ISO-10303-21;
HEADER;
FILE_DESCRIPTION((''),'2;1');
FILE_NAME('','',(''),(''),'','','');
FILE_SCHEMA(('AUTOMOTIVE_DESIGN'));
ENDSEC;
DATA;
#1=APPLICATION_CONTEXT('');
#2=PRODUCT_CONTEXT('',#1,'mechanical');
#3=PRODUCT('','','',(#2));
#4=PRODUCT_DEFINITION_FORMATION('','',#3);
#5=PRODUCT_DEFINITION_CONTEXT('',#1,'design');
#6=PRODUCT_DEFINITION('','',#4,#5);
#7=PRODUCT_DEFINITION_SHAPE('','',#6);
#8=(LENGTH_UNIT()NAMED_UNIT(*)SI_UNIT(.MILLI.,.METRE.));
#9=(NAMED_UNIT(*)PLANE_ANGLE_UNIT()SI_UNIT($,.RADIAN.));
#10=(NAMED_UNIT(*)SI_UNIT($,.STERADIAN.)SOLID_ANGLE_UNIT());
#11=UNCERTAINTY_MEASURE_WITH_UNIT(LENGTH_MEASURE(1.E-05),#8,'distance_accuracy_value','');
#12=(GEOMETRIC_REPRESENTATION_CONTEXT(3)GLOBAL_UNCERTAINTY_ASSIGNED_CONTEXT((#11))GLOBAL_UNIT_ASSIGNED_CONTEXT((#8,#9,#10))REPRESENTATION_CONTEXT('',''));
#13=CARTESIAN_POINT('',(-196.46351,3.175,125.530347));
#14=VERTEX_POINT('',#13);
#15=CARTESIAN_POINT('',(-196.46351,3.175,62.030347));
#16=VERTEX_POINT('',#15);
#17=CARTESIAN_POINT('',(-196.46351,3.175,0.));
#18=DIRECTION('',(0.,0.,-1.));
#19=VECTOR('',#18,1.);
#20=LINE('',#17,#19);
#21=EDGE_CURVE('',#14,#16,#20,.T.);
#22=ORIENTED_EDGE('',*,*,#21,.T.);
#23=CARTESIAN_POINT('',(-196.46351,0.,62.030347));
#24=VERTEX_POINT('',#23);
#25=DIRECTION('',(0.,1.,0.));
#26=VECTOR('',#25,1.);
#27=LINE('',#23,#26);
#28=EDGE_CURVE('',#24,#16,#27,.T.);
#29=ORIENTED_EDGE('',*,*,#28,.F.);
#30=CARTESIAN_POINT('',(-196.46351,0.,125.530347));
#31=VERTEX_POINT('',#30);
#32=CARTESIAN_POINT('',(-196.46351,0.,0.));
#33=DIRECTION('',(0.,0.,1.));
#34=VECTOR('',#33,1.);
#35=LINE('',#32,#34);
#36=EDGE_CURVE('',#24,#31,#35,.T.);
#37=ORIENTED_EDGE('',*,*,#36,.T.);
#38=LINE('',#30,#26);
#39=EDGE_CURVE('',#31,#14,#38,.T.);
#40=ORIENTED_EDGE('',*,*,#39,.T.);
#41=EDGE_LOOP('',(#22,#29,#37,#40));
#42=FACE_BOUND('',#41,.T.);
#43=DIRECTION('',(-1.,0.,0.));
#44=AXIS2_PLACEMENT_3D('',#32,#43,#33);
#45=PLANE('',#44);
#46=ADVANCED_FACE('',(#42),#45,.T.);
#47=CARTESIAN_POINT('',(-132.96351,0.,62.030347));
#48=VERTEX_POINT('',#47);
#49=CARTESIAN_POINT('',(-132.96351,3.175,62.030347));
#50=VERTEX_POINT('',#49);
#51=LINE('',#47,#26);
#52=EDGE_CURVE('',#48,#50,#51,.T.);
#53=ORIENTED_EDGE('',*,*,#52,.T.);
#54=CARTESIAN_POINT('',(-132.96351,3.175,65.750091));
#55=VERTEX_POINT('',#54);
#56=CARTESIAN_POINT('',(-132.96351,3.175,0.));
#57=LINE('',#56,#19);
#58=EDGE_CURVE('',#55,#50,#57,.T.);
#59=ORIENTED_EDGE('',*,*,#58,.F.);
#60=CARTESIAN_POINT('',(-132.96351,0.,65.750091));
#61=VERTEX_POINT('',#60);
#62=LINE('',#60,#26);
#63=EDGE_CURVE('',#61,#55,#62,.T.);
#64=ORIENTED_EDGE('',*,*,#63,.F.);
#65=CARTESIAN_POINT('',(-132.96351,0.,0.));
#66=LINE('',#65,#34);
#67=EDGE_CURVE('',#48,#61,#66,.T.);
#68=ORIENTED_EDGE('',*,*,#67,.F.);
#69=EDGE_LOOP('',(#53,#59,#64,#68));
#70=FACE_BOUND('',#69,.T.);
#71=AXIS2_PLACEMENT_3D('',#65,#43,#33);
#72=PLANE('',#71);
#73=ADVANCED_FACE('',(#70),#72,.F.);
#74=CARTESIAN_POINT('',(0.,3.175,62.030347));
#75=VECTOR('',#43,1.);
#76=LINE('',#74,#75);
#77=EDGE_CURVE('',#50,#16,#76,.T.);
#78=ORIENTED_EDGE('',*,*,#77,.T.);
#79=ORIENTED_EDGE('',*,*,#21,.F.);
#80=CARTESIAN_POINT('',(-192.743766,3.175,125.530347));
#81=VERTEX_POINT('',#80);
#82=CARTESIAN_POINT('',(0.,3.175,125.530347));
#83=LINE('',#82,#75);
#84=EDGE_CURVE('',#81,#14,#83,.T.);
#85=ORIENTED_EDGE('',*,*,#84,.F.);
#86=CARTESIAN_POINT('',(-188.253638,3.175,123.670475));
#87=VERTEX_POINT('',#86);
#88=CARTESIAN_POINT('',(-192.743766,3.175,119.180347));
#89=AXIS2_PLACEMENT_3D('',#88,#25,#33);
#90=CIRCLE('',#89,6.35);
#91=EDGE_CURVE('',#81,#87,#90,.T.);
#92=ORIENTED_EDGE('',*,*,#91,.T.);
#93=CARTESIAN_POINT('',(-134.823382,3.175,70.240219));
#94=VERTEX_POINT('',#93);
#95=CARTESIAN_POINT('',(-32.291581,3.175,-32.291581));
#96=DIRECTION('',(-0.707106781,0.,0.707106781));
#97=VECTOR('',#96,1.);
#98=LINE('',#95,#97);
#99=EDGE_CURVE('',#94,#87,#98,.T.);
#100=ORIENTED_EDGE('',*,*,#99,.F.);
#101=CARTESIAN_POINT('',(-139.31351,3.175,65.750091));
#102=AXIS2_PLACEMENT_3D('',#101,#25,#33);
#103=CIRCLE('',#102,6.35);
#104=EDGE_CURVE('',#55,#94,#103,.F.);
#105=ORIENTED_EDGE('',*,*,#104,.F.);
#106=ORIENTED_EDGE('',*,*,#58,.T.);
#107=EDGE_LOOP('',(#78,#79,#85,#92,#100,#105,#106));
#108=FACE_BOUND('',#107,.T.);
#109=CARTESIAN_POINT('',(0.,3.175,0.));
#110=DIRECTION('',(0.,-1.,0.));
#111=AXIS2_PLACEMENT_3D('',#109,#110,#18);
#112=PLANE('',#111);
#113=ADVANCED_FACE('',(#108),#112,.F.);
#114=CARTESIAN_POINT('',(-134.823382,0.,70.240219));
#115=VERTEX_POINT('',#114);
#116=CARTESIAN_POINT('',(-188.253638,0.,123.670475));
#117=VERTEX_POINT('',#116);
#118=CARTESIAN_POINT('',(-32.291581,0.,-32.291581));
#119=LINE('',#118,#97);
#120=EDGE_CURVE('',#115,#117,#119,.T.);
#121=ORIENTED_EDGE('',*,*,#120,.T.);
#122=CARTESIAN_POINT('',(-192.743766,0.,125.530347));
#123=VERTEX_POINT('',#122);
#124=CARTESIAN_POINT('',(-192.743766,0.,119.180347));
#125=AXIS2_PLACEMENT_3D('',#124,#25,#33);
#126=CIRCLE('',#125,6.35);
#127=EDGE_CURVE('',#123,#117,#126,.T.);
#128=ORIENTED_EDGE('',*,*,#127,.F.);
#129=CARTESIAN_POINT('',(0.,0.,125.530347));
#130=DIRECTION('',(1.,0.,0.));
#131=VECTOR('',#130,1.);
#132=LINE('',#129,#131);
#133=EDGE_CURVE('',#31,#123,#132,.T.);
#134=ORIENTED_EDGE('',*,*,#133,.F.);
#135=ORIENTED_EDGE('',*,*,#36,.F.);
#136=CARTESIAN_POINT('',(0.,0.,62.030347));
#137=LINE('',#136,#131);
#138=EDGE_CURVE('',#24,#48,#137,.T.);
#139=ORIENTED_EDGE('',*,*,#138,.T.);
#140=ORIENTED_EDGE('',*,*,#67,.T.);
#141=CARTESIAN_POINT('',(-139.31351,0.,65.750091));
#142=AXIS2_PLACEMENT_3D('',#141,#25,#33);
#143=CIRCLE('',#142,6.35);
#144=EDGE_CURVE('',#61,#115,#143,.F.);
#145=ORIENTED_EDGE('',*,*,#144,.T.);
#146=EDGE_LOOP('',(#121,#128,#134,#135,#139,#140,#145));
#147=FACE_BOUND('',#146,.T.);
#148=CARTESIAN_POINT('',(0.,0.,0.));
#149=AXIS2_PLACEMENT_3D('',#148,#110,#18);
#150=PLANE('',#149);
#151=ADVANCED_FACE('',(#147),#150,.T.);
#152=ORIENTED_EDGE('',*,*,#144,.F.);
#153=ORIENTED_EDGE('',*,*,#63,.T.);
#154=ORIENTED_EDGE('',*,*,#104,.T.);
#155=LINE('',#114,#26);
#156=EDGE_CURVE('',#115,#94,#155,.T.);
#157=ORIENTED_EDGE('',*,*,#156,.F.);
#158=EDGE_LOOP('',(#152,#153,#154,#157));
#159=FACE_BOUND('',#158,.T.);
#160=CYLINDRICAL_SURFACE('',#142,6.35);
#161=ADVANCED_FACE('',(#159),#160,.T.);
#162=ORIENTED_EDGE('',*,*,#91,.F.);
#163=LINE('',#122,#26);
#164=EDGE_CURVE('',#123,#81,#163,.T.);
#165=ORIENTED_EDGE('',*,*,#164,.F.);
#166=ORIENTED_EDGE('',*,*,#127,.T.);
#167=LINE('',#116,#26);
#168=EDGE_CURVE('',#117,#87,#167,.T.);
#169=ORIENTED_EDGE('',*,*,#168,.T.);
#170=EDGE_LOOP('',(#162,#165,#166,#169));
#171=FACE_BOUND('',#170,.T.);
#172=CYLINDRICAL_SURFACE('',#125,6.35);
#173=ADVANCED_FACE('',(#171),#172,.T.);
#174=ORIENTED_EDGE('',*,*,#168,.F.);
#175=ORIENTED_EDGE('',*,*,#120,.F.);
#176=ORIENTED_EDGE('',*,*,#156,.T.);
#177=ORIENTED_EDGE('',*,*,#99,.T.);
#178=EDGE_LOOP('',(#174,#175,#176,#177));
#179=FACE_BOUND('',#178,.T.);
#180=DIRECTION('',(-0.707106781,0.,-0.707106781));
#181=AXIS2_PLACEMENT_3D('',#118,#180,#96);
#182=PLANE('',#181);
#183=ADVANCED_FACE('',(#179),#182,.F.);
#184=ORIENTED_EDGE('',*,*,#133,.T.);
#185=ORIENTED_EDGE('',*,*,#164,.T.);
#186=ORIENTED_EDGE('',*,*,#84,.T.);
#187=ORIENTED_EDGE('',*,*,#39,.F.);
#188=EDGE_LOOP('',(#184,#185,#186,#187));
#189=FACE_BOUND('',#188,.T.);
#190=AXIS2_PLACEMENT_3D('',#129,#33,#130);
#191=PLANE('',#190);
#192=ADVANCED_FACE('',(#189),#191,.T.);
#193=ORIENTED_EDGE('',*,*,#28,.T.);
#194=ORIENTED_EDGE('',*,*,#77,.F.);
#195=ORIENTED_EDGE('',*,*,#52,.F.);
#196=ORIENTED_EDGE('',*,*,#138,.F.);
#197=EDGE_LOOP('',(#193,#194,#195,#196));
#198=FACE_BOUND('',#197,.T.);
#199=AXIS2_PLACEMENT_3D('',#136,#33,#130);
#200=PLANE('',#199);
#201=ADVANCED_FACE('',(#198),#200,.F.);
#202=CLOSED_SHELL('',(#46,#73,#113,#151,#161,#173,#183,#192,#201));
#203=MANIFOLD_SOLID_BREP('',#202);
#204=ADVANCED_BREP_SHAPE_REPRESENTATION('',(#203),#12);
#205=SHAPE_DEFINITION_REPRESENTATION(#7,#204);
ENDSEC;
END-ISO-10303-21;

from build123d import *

# Parameters (mm, degrees)
SKETCH2_W                      = 304.8
SKETCH2_H                      = 304.8
BOSS_EXTRUDE1_DEPTH            = 3.175
CUT_EXTRUDE1_DEPTH             = 348.408852067
CUT_EXTRUDE1_DEPTH_BACK        = 348.408852067
SKETCH3_W                      = 304.8
SKETCH3_H                      = 304.8
SKETCH3_R                      = 12.7
SKETCH3_R_2                    = 8.89
BODY_DELETE_KEEP_1_OUTLINE_R   = 12.7
BODY_DELETE_KEEP_1_OUTLINE_R_2 = 8.89
BODY_DELETE_KEEP_1_DEPTH       = 3.175


# Read off the part's stored shape, not the designer's step: Body-Delete/Keep 1
with BuildPart() as part:
    # Sketch2 → Boss-Extrude1 (new body)
    with BuildSketch(Plane(origin=(0, 0, 0), x_dir=(1, 0, 0), z_dir=(0, 1, 0))):
        with Locations((-56.763509666, -124.968808797)):
            Rectangle(SKETCH2_W, SKETCH2_H)
    extrude(amount=BOSS_EXTRUDE1_DEPTH)

    # Sketch3 → Cut-Extrude1 (cut, two sides: drawn at the far end of the back side and taken through both)
    # profile 1 of 3: a face of its own
    with BuildSketch(Plane(origin=(0, 3.175, 0), x_dir=(1, 0, 0), z_dir=(0, 1, 0)).offset(-CUT_EXTRUDE1_DEPTH_BACK)):
        with Locations((-56.763509666, -124.968808797)):
            Rectangle(SKETCH3_W, SKETCH3_H)
        Polygon((-188.253637726, -268.695366412), (-192.063637726, -268.695366412), (-192.063637726, -265.393366412), (-198.413637726, -265.393366412), (-188.253637726, -205.195366412), align=None, mode=Mode.SUBTRACT)
        Polygon((-185.713637726, -265.393366412), (-175.553637726, -205.195366412), (-175.553637726, -268.695366412), (-179.363637726, -268.695366412), (-179.363637726, -265.393366412), align=None, mode=Mode.SUBTRACT)
        Polygon((-162.853637726, -268.695366412), (-166.663637726, -268.695366412), (-166.663637726, -265.393366412), (-173.013637726, -265.393366412), (-162.853637726, -205.195366412), align=None, mode=Mode.SUBTRACT)
        Polygon((-150.153637726, -268.695366412), (-153.963637726, -268.695366412), (-153.963637726, -265.393366412), (-160.313637726, -265.393366412), (-150.153637726, -205.195366412), align=None, mode=Mode.SUBTRACT)
        Polygon((-147.613637726, -265.393366412), (-137.453637726, -205.195366412), (-137.453637726, -268.695366412), (-141.263637726, -268.695366412), (-141.263637726, -265.393366412), align=None, mode=Mode.SUBTRACT)
        Polygon((-128.563637726, -265.393366412), (-134.913637726, -265.393366412), (-124.753637726, -205.195366412), (-124.753637726, -268.695366412), (-128.563637726, -268.695366412), align=None, mode=Mode.SUBTRACT)
        Polygon((-122.213637726, -265.393366412), (-112.053637726, -205.195366412), (-112.053637726, -268.695366412), (-115.863637726, -268.695366412), (-115.863637726, -265.393366412), align=None, mode=Mode.SUBTRACT)
        Polygon((-99.353637726, -268.695366412), (-103.163637726, -268.695366412), (-103.163637726, -265.393366412), (-109.513637726, -265.393366412), (-99.353637726, -205.195366412), align=None, mode=Mode.SUBTRACT)
        Polygon((-90.463637726, -268.695366412), (-90.463637726, -265.393366412), (-96.813637726, -265.393366412), (-86.653637726, -205.195366412), (-86.653637726, -268.695366412), align=None, mode=Mode.SUBTRACT)
        Polygon((-84.113637726, -265.393366412), (-73.953637726, -205.195366412), (-73.953637726, -268.695366412), (-77.763637726, -268.695366412), (-77.763637726, -265.393366412), align=None, mode=Mode.SUBTRACT)
        Polygon((-71.413637726, -265.393366412), (-61.253637726, -205.195366412), (-61.253637726, -268.695366412), (-65.063637726, -268.695366412), (-65.063637726, -265.393366412), align=None, mode=Mode.SUBTRACT)
        with BuildLine():
            ThreePointArc((-132.963509666, -135.600090559), (-133.446874634, -138.030130355), (-134.823381605, -140.09021862))
            Line((-134.823381605, -140.09021862), (-188.253637726, -193.520474741))
            ThreePointArc((-188.253637726, -193.520474741), (-190.313725991, -194.896981712), (-192.743765787, -195.38034668))
            Line((-192.743765787, -195.38034668), (-196.463509666, -195.38034668))
            Line((-196.463509666, -195.38034668), (-196.463509666, -131.88034668))
            Line((-196.463509666, -131.88034668), (-132.963509666, -131.88034668))
            Line((-132.963509666, -131.88034668), (-132.963509666, -135.600090559))
        make_face(mode=Mode.SUBTRACT)
        with BuildLine():
            Line((-126.613509666, -195.38034668), (-126.613509666, -131.88034668))
            Line((-126.613509666, -131.88034668), (-63.113509666, -131.88034668))
            Line((-63.113509666, -131.88034668), (-63.113509666, -135.600090559))
            ThreePointArc((-63.113509666, -135.600090559), (-63.596874634, -138.030130355), (-64.973381605, -140.09021862))
            Line((-64.973381605, -140.09021862), (-118.403637726, -193.520474741))
            ThreePointArc((-118.403637726, -193.520474741), (-120.463725991, -194.896981712), (-122.893765787, -195.38034668))
            Line((-122.893765787, -195.38034668), (-126.613509666, -195.38034668))
        make_face(mode=Mode.SUBTRACT)
        Polygon((-52.363637726, -268.695366412), (-52.363637726, -265.393366412), (-58.713637726, -265.393366412), (-48.553637726, -205.195366412), (-48.553637726, -268.695366412), align=None, mode=Mode.SUBTRACT)
        Polygon((-35.853637726, -205.195366412), (-35.853637726, -268.695366412), (-39.663637726, -268.695366412), (-39.663637726, -265.393366412), (-46.013637726, -265.393366412), align=None, mode=Mode.SUBTRACT)
        Polygon((-23.153637726, -205.195366412), (-23.153637726, -268.695366412), (-26.963637726, -268.695366412), (-26.963637726, -265.393366412), (-33.313637726, -265.393366412), align=None, mode=Mode.SUBTRACT)
        Polygon((-20.613637726, -265.393366412), (-10.453637726, -205.195366412), (-10.453637726, -268.695366412), (-14.263637726, -268.695366412), (-14.263637726, -265.393366412), align=None, mode=Mode.SUBTRACT)
        Polygon((-1.563637726, -268.695366412), (-1.563637726, -265.393366412), (-7.913637726, -265.393366412), (2.246362274, -205.195366412), (2.246362274, -268.695366412), align=None, mode=Mode.SUBTRACT)
        with BuildLine():
            Line((-53.043765787, -195.38034668), (-56.763509666, -195.38034668))
            Line((-56.763509666, -195.38034668), (-56.763509666, -131.88034668))
            Line((-56.763509666, -131.88034668), (6.736490334, -131.88034668))
            Line((6.736490334, -131.88034668), (6.736490334, -135.600090559))
            ThreePointArc((6.736490334, -135.600090559), (6.253125366, -138.030130355), (4.876618395, -140.09021862))
            Line((4.876618395, -140.09021862), (-48.553637726, -193.520474741))
            ThreePointArc((-48.553637726, -193.520474741), (-50.613725991, -194.896981712), (-53.043765787, -195.38034668))
        make_face(mode=Mode.SUBTRACT)
        with BuildLine():
            Line((13.086490334, -131.88034668), (76.586490334, -131.88034668))
            Line((76.586490334, -131.88034668), (76.586490334, -135.600090559))
            ThreePointArc((76.586490334, -135.600090559), (76.103125366, -138.030130355), (74.726618395, -140.09021862))
            Line((74.726618395, -140.09021862), (21.296362274, -193.520474741))
            ThreePointArc((21.296362274, -193.520474741), (19.236274009, -194.896981712), (16.806234213, -195.38034668))
            Line((16.806234213, -195.38034668), (13.086490334, -195.38034668))
            Line((13.086490334, -195.38034668), (13.086490334, -131.88034668))
        make_face(mode=Mode.SUBTRACT)
        with BuildLine():
            Line((-196.463509666, -125.53034668), (-196.463509666, -62.03034668))
            Line((-196.463509666, -62.03034668), (-132.963509666, -62.03034668))
            Line((-132.963509666, -62.03034668), (-132.963509666, -65.750090559))
            ThreePointArc((-132.963509666, -65.750090559), (-133.10773728, -67.095783354), (-133.533868437, -68.38034668))
            ThreePointArc((-133.533868437, -68.38034668), (-134.095097913, -69.368194866), (-134.823381605, -70.24021862))
            Line((-134.823381605, -70.24021862), (-188.253637726, -123.670474741))
            ThreePointArc((-188.253637726, -123.670474741), (-189.12566148, -124.398758433), (-190.113509666, -124.959987909))
            ThreePointArc((-190.113509666, -124.959987909), (-191.398072992, -125.386119066), (-192.743765787, -125.53034668))
            Line((-192.743765787, -125.53034668), (-196.463509666, -125.53034668))
        make_face(mode=Mode.SUBTRACT)
        with BuildLine():
            Line((-122.893765787, -125.53034668), (-126.613509666, -125.53034668))
            Line((-126.613509666, -125.53034668), (-126.613509666, -62.03034668))
            Line((-126.613509666, -62.03034668), (-63.113509666, -62.03034668))
            Line((-63.113509666, -62.03034668), (-63.113509666, -65.750090559))
            ThreePointArc((-63.113509666, -65.750090559), (-63.596874634, -68.180130355), (-64.973381605, -70.24021862))
            Line((-64.973381605, -70.24021862), (-118.403637726, -123.670474741))
            ThreePointArc((-118.403637726, -123.670474741), (-120.463725991, -125.046981712), (-122.893765787, -125.53034668))
        make_face(mode=Mode.SUBTRACT)
        Polygon((-196.463509666, -48.768808797), (-196.463509666, 14.731191203), (-192.653509666, 14.731191203), (-192.653509666, 11.429191203), (-186.303509666, 11.429191203), align=None, mode=Mode.SUBTRACT)
        Polygon((-183.763509666, 14.731191203), (-179.953509666, 14.731191203), (-179.953509666, 11.429191203), (-173.603509666, 11.429191203), (-183.763509666, -48.768808797), align=None, mode=Mode.SUBTRACT)
        Polygon((-171.063509666, 14.731191203), (-167.253509666, 14.731191203), (-167.253509666, 11.429191203), (-160.903509666, 11.429191203), (-171.063509666, -48.768808797), align=None, mode=Mode.SUBTRACT)
        Polygon((-158.363509666, 14.731191203), (-154.553509666, 14.731191203), (-154.553509666, 11.429191203), (-148.203509666, 11.429191203), (-158.363509666, -48.768808797), align=None, mode=Mode.SUBTRACT)
        Polygon((-145.663509666, 14.731191203), (-141.853509666, 14.731191203), (-141.853509666, 11.429191203), (-135.503509666, 11.429191203), (-145.663509666, -48.768808797), align=None, mode=Mode.SUBTRACT)
        Polygon((-132.963509666, 14.731191203), (-129.153509666, 14.731191203), (-129.153509666, 11.429191203), (-122.803509666, 11.429191203), (-132.963509666, -48.768808797), align=None, mode=Mode.SUBTRACT)
        Polygon((-120.263509666, 14.731191203), (-116.453509666, 14.731191203), (-116.453509666, 11.429191203), (-110.103509666, 11.429191203), (-120.263509666, -48.768808797), align=None, mode=Mode.SUBTRACT)
        Polygon((-107.563509666, 14.731191203), (-103.753509666, 14.731191203), (-103.753509666, 11.429191203), (-97.403509666, 11.429191203), (-107.563509666, -48.768808797), align=None, mode=Mode.SUBTRACT)
        Polygon((-94.863509666, 14.731191203), (-91.053509666, 14.731191203), (-91.053509666, 11.429191203), (-84.703509666, 11.429191203), (-94.863509666, -48.768808797), align=None, mode=Mode.SUBTRACT)
        Polygon((-82.163509666, 14.731191203), (-78.353509666, 14.731191203), (-78.353509666, 11.429191203), (-72.003509666, 11.429191203), (-82.163509666, -48.768808797), align=None, mode=Mode.SUBTRACT)
        Polygon((-69.463509666, 14.731191203), (-65.653509666, 14.731191203), (-65.653509666, 11.429191203), (-59.303509666, 11.429191203), (-69.463509666, -48.768808797), align=None, mode=Mode.SUBTRACT)
        with BuildLine():
            Line((-53.043765787, -125.53034668), (-56.763509666, -125.53034668))
            Line((-56.763509666, -125.53034668), (-56.763509666, -62.03034668))
            Line((-56.763509666, -62.03034668), (6.736490334, -62.03034668))
            Line((6.736490334, -62.03034668), (6.736490334, -65.750090559))
            ThreePointArc((6.736490334, -65.750090559), (6.253125366, -68.180130355), (4.876618395, -70.24021862))
            Line((4.876618395, -70.24021862), (-48.553637726, -123.670474741))
            ThreePointArc((-48.553637726, -123.670474741), (-50.613725991, -125.046981712), (-53.043765787, -125.53034668))
        make_face(mode=Mode.SUBTRACT)
        with BuildLine():
            Line((16.806234213, -125.53034668), (13.086490334, -125.53034668))
            Line((13.086490334, -125.53034668), (13.086490334, -62.03034668))
            Line((13.086490334, -62.03034668), (76.586490334, -62.03034668))
            Line((76.586490334, -62.03034668), (76.586490334, -65.750090559))
            ThreePointArc((76.586490334, -65.750090559), (76.103125366, -68.180130355), (74.726618395, -70.24021862))
            Line((74.726618395, -70.24021862), (21.296362274, -123.670474741))
            ThreePointArc((21.296362274, -123.670474741), (19.236274009, -125.046981712), (16.806234213, -125.53034668))
        make_face(mode=Mode.SUBTRACT)
        Polygon((-56.763509666, 14.731191203), (-52.953509666, 14.731191203), (-52.953509666, 11.429191203), (-46.603509666, 11.429191203), (-56.763509666, -48.768808797), align=None, mode=Mode.SUBTRACT)
        Polygon((-44.063509666, 14.731191203), (-40.253509666, 14.731191203), (-40.253509666, 11.429191203), (-33.903509666, 11.429191203), (-44.063509666, -48.768808797), align=None, mode=Mode.SUBTRACT)
        Polygon((-31.363509666, 14.731191203), (-27.553509666, 14.731191203), (-27.553509666, 11.429191203), (-21.203509666, 11.429191203), (-31.363509666, -48.768808797), align=None, mode=Mode.SUBTRACT)
        Polygon((-18.663509666, 14.731191203), (-14.853509666, 14.731191203), (-14.853509666, 11.429191203), (-8.503509666, 11.429191203), (-18.663509666, -48.768808797), align=None, mode=Mode.SUBTRACT)
        Polygon((-5.963509666, 14.731191203), (-2.153509666, 14.731191203), (-2.153509666, 11.429191203), (4.196490334, 11.429191203), (-5.963509666, -48.768808797), align=None, mode=Mode.SUBTRACT)
        Polygon((57.536490334, -48.768808797), (57.536490334, -52.070808797), (32.136490334, -52.070808797), (32.136490334, -48.768808797), (28.834490334, -48.768808797), (28.834490334, -23.368808797), (32.136490334, -23.368808797), (32.136490334, -20.066808797), (57.536490334, -20.066808797), (57.536490334, -23.368808797), (60.838490334, -23.368808797), (60.838490334, -48.768808797), align=None, mode=Mode.SUBTRACT)
        Polygon((28.834490334, 14.731191203), (32.136490334, 14.731191203), (32.136490334, 18.033191203), (57.536490334, 18.033191203), (57.536490334, 14.731191203), (60.838490334, 14.731191203), (60.838490334, -10.668808797), (57.536490334, -10.668808797), (57.536490334, -13.970808797), (32.136490334, -13.970808797), (32.136490334, -10.668808797), (28.834490334, -10.668808797), align=None, mode=Mode.SUBTRACT)
    # profile 2 of 3: a face of its own
    with BuildSketch(Plane(origin=(0, 3.175, 0), x_dir=(1, 0, 0), z_dir=(0, 1, 0)).offset(-CUT_EXTRUDE1_DEPTH_BACK)):
        with Locations(Location((44.836490334, -36.068808797, 0), (0, 0, 270))):
            Circle(SKETCH3_R)
    # profile 3 of 3: a face of its own
    with BuildSketch(Plane(origin=(0, 3.175, 0), x_dir=(1, 0, 0), z_dir=(0, 1, 0)).offset(-CUT_EXTRUDE1_DEPTH_BACK)):
        with Locations(Location((44.836490334, 2.031191203, 0), (0, 0, 270))):
            Circle(SKETCH3_R_2)
    extrude(amount=CUT_EXTRUDE1_DEPTH + CUT_EXTRUDE1_DEPTH_BACK, mode=Mode.SUBTRACT)

    # Body-Delete/Keep 1 outline → Body-Delete/Keep 1 (cut)
    # profile 1 of 41: a face of its own
    with BuildSketch(Plane(origin=(0, 0, 0), x_dir=(1, 0, 0), z_dir=(0, 1, 0))):
        with BuildLine():
            Line((-126.613509666, -62.03034668), (-126.613509666, -125.53034668))
            Line((-126.613509666, -125.53034668), (-122.893765787, -125.53034668))
            ThreePointArc((-122.893765787, -125.53034668), (-120.463725991, -125.046981712), (-118.403637726, -123.670474741))
            Line((-118.403637726, -123.670474741), (-64.973381605, -70.24021862))
            ThreePointArc((-64.973381605, -70.24021862), (-63.596874634, -68.180130355), (-63.113509666, -65.750090559))
            Line((-63.113509666, -65.750090559), (-63.113509666, -62.03034668))
            Line((-63.113509666, -62.03034668), (-126.613509666, -62.03034668))
        make_face()
    # profile 2 of 41: a face of its own
    with BuildSketch(Plane(origin=(0, 0, 0), x_dir=(1, 0, 0), z_dir=(0, 1, 0))):
        with BuildLine():
            Line((-56.763509666, -62.03034668), (-56.763509666, -125.53034668))
            Line((-56.763509666, -125.53034668), (-53.043765787, -125.53034668))
            ThreePointArc((-53.043765787, -125.53034668), (-50.613725991, -125.046981712), (-48.553637726, -123.670474741))
            Line((-48.553637726, -123.670474741), (4.876618395, -70.24021862))
            ThreePointArc((4.876618395, -70.24021862), (6.253125366, -68.180130355), (6.736490334, -65.750090559))
            Line((6.736490334, -65.750090559), (6.736490334, -62.03034668))
            Line((6.736490334, -62.03034668), (-56.763509666, -62.03034668))
        make_face()
    # profile 3 of 41: a face of its own
    with BuildSketch(Plane(origin=(0, 0, 0), x_dir=(1, 0, 0), z_dir=(0, 1, 0))):
        with BuildLine():
            Line((13.086490334, -62.03034668), (13.086490334, -125.53034668))
            Line((13.086490334, -125.53034668), (16.806234213, -125.53034668))
            ThreePointArc((16.806234213, -125.53034668), (19.236274009, -125.046981712), (21.296362274, -123.670474741))
            Line((21.296362274, -123.670474741), (74.726618395, -70.24021862))
            ThreePointArc((74.726618395, -70.24021862), (76.103125366, -68.180130355), (76.586490334, -65.750090559))
            Line((76.586490334, -65.750090559), (76.586490334, -62.03034668))
            Line((76.586490334, -62.03034668), (13.086490334, -62.03034668))
        make_face()
    # profile 4 of 41: a face of its own
    with BuildSketch(Plane(origin=(0, 0, 0), x_dir=(1, 0, 0), z_dir=(0, 1, 0))):
        Polygon((-192.653509666, 14.731191203), (-196.463509666, 14.731191203), (-196.463509666, -48.768808797), (-186.303509666, 11.429191203), (-192.653509666, 11.429191203), align=None)
    # profile 5 of 41: a face of its own
    with BuildSketch(Plane(origin=(0, 0, 0), x_dir=(1, 0, 0), z_dir=(0, 1, 0))):
        with BuildLine():
            Line((-132.963509666, -131.88034668), (-196.463509666, -131.88034668))
            Line((-196.463509666, -131.88034668), (-196.463509666, -195.38034668))
            Line((-196.463509666, -195.38034668), (-192.743765787, -195.38034668))
            ThreePointArc((-192.743765787, -195.38034668), (-190.313725991, -194.896981712), (-188.253637726, -193.520474741))
            Line((-188.253637726, -193.520474741), (-134.823381605, -140.09021862))
            ThreePointArc((-134.823381605, -140.09021862), (-133.446874634, -138.030130355), (-132.963509666, -135.600090559))
            Line((-132.963509666, -135.600090559), (-132.963509666, -131.88034668))
        make_face()
    # profile 6 of 41: a face of its own
    with BuildSketch(Plane(origin=(0, 0, 0), x_dir=(1, 0, 0), z_dir=(0, 1, 0))):
        Polygon((32.136490334, -20.066808797), (32.136490334, -23.368808797), (28.834490334, -23.368808797), (28.834490334, -48.768808797), (32.136490334, -48.768808797), (32.136490334, -52.070808797), (57.536490334, -52.070808797), (57.536490334, -48.768808797), (60.838490334, -48.768808797), (60.838490334, -23.368808797), (57.536490334, -23.368808797), (57.536490334, -20.066808797), align=None)
        with Locations((44.836490334, -36.068808797)):
            Circle(BODY_DELETE_KEEP_1_OUTLINE_R, mode=Mode.SUBTRACT)
    # profile 7 of 41: a face of its own
    with BuildSketch(Plane(origin=(0, 0, 0), x_dir=(1, 0, 0), z_dir=(0, 1, 0))):
        Polygon((28.834490334, -10.668808797), (32.136490334, -10.668808797), (32.136490334, -13.970808797), (57.536490334, -13.970808797), (57.536490334, -10.668808797), (60.838490334, -10.668808797), (60.838490334, 14.731191203), (57.536490334, 14.731191203), (57.536490334, 18.033191203), (32.136490334, 18.033191203), (32.136490334, 14.731191203), (28.834490334, 14.731191203), align=None)
        with Locations((44.836490334, 2.031191203)):
            Circle(BODY_DELETE_KEEP_1_OUTLINE_R_2, mode=Mode.SUBTRACT)
    # profile 8 of 41: a face of its own
    with BuildSketch(Plane(origin=(0, 0, 0), x_dir=(1, 0, 0), z_dir=(0, 1, 0))):
        Polygon((-2.153509666, 11.429191203), (-2.153509666, 14.731191203), (-5.963509666, 14.731191203), (-5.963509666, -48.768808797), (4.196490334, 11.429191203), align=None)
    # profile 9 of 41: a face of its own
    with BuildSketch(Plane(origin=(0, 0, 0), x_dir=(1, 0, 0), z_dir=(0, 1, 0))):
        Polygon((-27.553509666, 11.429191203), (-27.553509666, 14.731191203), (-31.363509666, 14.731191203), (-31.363509666, -48.768808797), (-21.203509666, 11.429191203), align=None)
    # profile 10 of 41: a face of its own
    with BuildSketch(Plane(origin=(0, 0, 0), x_dir=(1, 0, 0), z_dir=(0, 1, 0))):
        Polygon((-14.853509666, 11.429191203), (-14.853509666, 14.731191203), (-18.663509666, 14.731191203), (-18.663509666, -48.768808797), (-8.503509666, 11.429191203), align=None)
    # profile 11 of 41: a face of its own
    with BuildSketch(Plane(origin=(0, 0, 0), x_dir=(1, 0, 0), z_dir=(0, 1, 0))):
        Polygon((-65.653509666, 11.429191203), (-65.653509666, 14.731191203), (-69.463509666, 14.731191203), (-69.463509666, -48.768808797), (-59.303509666, 11.429191203), align=None)
    # profile 12 of 41: a face of its own
    with BuildSketch(Plane(origin=(0, 0, 0), x_dir=(1, 0, 0), z_dir=(0, 1, 0))):
        Polygon((-91.053509666, 11.429191203), (-91.053509666, 14.731191203), (-94.863509666, 14.731191203), (-94.863509666, -48.768808797), (-84.703509666, 11.429191203), align=None)
    # profile 13 of 41: a face of its own
    with BuildSketch(Plane(origin=(0, 0, 0), x_dir=(1, 0, 0), z_dir=(0, 1, 0))):
        Polygon((-40.253509666, 11.429191203), (-40.253509666, 14.731191203), (-44.063509666, 14.731191203), (-44.063509666, -48.768808797), (-33.903509666, 11.429191203), align=None)
    # profile 14 of 41: a face of its own
    with BuildSketch(Plane(origin=(0, 0, 0), x_dir=(1, 0, 0), z_dir=(0, 1, 0))):
        Polygon((-52.953509666, 11.429191203), (-52.953509666, 14.731191203), (-56.763509666, 14.731191203), (-56.763509666, -48.768808797), (-46.603509666, 11.429191203), align=None)
    # profile 15 of 41: a face of its own
    with BuildSketch(Plane(origin=(0, 0, 0), x_dir=(1, 0, 0), z_dir=(0, 1, 0))):
        Polygon((-141.853509666, 11.429191203), (-141.853509666, 14.731191203), (-145.663509666, 14.731191203), (-145.663509666, -48.768808797), (-135.503509666, 11.429191203), align=None)
    # profile 16 of 41: a face of its own
    with BuildSketch(Plane(origin=(0, 0, 0), x_dir=(1, 0, 0), z_dir=(0, 1, 0))):
        Polygon((-154.553509666, 11.429191203), (-154.553509666, 14.731191203), (-158.363509666, 14.731191203), (-158.363509666, -48.768808797), (-148.203509666, 11.429191203), align=None)
    # profile 17 of 41: a face of its own
    with BuildSketch(Plane(origin=(0, 0, 0), x_dir=(1, 0, 0), z_dir=(0, 1, 0))):
        Polygon((-167.253509666, 11.429191203), (-167.253509666, 14.731191203), (-171.063509666, 14.731191203), (-171.063509666, -48.768808797), (-160.903509666, 11.429191203), align=None)
    # profile 18 of 41: a face of its own
    with BuildSketch(Plane(origin=(0, 0, 0), x_dir=(1, 0, 0), z_dir=(0, 1, 0))):
        Polygon((-78.353509666, 11.429191203), (-78.353509666, 14.731191203), (-82.163509666, 14.731191203), (-82.163509666, -48.768808797), (-72.003509666, 11.429191203), align=None)
    # profile 19 of 41: a face of its own
    with BuildSketch(Plane(origin=(0, 0, 0), x_dir=(1, 0, 0), z_dir=(0, 1, 0))):
        Polygon((-179.953509666, 11.429191203), (-179.953509666, 14.731191203), (-183.763509666, 14.731191203), (-183.763509666, -48.768808797), (-173.603509666, 11.429191203), align=None)
    # profile 20 of 41: a face of its own
    with BuildSketch(Plane(origin=(0, 0, 0), x_dir=(1, 0, 0), z_dir=(0, 1, 0))):
        Polygon((-103.753509666, 11.429191203), (-103.753509666, 14.731191203), (-107.563509666, 14.731191203), (-107.563509666, -48.768808797), (-97.403509666, 11.429191203), align=None)
    # profile 21 of 41: a face of its own
    with BuildSketch(Plane(origin=(0, 0, 0), x_dir=(1, 0, 0), z_dir=(0, 1, 0))):
        Polygon((-116.453509666, 11.429191203), (-116.453509666, 14.731191203), (-120.263509666, 14.731191203), (-120.263509666, -48.768808797), (-110.103509666, 11.429191203), align=None)
    # profile 22 of 41: a face of its own
    with BuildSketch(Plane(origin=(0, 0, 0), x_dir=(1, 0, 0), z_dir=(0, 1, 0))):
        Polygon((-129.153509666, 11.429191203), (-129.153509666, 14.731191203), (-132.963509666, 14.731191203), (-132.963509666, -48.768808797), (-122.803509666, 11.429191203), align=None)
    # profile 23 of 41: a face of its own
    with BuildSketch(Plane(origin=(0, 0, 0), x_dir=(1, 0, 0), z_dir=(0, 1, 0))):
        Polygon((-71.413637726, -265.393366412), (-65.063637726, -265.393366412), (-65.063637726, -268.695366412), (-61.253637726, -268.695366412), (-61.253637726, -205.195366412), align=None)
    # profile 24 of 41: a face of its own
    with BuildSketch(Plane(origin=(0, 0, 0), x_dir=(1, 0, 0), z_dir=(0, 1, 0))):
        Polygon((-124.753637726, -205.195366412), (-134.913637726, -265.393366412), (-128.563637726, -265.393366412), (-128.563637726, -268.695366412), (-124.753637726, -268.695366412), align=None)
    # profile 25 of 41: a face of its own
    with BuildSketch(Plane(origin=(0, 0, 0), x_dir=(1, 0, 0), z_dir=(0, 1, 0))):
        Polygon((-23.153637726, -205.195366412), (-33.313637726, -265.393366412), (-26.963637726, -265.393366412), (-26.963637726, -268.695366412), (-23.153637726, -268.695366412), align=None)
    # profile 26 of 41: a face of its own
    with BuildSketch(Plane(origin=(0, 0, 0), x_dir=(1, 0, 0), z_dir=(0, 1, 0))):
        Polygon((-35.853637726, -205.195366412), (-46.013637726, -265.393366412), (-39.663637726, -265.393366412), (-39.663637726, -268.695366412), (-35.853637726, -268.695366412), align=None)
    # profile 27 of 41: a face of its own
    with BuildSketch(Plane(origin=(0, 0, 0), x_dir=(1, 0, 0), z_dir=(0, 1, 0))):
        Polygon((-73.953637726, -205.195366412), (-84.113637726, -265.393366412), (-77.763637726, -265.393366412), (-77.763637726, -268.695366412), (-73.953637726, -268.695366412), align=None)
    # profile 28 of 41: a face of its own
    with BuildSketch(Plane(origin=(0, 0, 0), x_dir=(1, 0, 0), z_dir=(0, 1, 0))):
        Polygon((-162.853637726, -205.195366412), (-173.013637726, -265.393366412), (-166.663637726, -265.393366412), (-166.663637726, -268.695366412), (-162.853637726, -268.695366412), align=None)
    # profile 29 of 41: a face of its own
    with BuildSketch(Plane(origin=(0, 0, 0), x_dir=(1, 0, 0), z_dir=(0, 1, 0))):
        Polygon((-188.253637726, -205.195366412), (-198.413637726, -265.393366412), (-192.063637726, -265.393366412), (-192.063637726, -268.695366412), (-188.253637726, -268.695366412), align=None)
    # profile 30 of 41: a face of its own
    with BuildSketch(Plane(origin=(0, 0, 0), x_dir=(1, 0, 0), z_dir=(0, 1, 0))):
        Polygon((-175.553637726, -205.195366412), (-185.713637726, -265.393366412), (-179.363637726, -265.393366412), (-179.363637726, -268.695366412), (-175.553637726, -268.695366412), align=None)
    # profile 31 of 41: a face of its own
    with BuildSketch(Plane(origin=(0, 0, 0), x_dir=(1, 0, 0), z_dir=(0, 1, 0))):
        Polygon((-150.153637726, -205.195366412), (-160.313637726, -265.393366412), (-153.963637726, -265.393366412), (-153.963637726, -268.695366412), (-150.153637726, -268.695366412), align=None)
    # profile 32 of 41: a face of its own
    with BuildSketch(Plane(origin=(0, 0, 0), x_dir=(1, 0, 0), z_dir=(0, 1, 0))):
        Polygon((-86.653637726, -205.195366412), (-96.813637726, -265.393366412), (-90.463637726, -265.393366412), (-90.463637726, -268.695366412), (-86.653637726, -268.695366412), align=None)
    # profile 33 of 41: a face of its own
    with BuildSketch(Plane(origin=(0, 0, 0), x_dir=(1, 0, 0), z_dir=(0, 1, 0))):
        Polygon((2.246362274, -205.195366412), (-7.913637726, -265.393366412), (-1.563637726, -265.393366412), (-1.563637726, -268.695366412), (2.246362274, -268.695366412), align=None)
    # profile 34 of 41: a face of its own
    with BuildSketch(Plane(origin=(0, 0, 0), x_dir=(1, 0, 0), z_dir=(0, 1, 0))):
        Polygon((-137.453637726, -205.195366412), (-147.613637726, -265.393366412), (-141.263637726, -265.393366412), (-141.263637726, -268.695366412), (-137.453637726, -268.695366412), align=None)
    # profile 35 of 41: a face of its own
    with BuildSketch(Plane(origin=(0, 0, 0), x_dir=(1, 0, 0), z_dir=(0, 1, 0))):
        Polygon((-48.553637726, -205.195366412), (-58.713637726, -265.393366412), (-52.363637726, -265.393366412), (-52.363637726, -268.695366412), (-48.553637726, -268.695366412), align=None)
    # profile 36 of 41: a face of its own
    with BuildSketch(Plane(origin=(0, 0, 0), x_dir=(1, 0, 0), z_dir=(0, 1, 0))):
        Polygon((-10.453637726, -205.195366412), (-20.613637726, -265.393366412), (-14.263637726, -265.393366412), (-14.263637726, -268.695366412), (-10.453637726, -268.695366412), align=None)
    # profile 37 of 41: a face of its own
    with BuildSketch(Plane(origin=(0, 0, 0), x_dir=(1, 0, 0), z_dir=(0, 1, 0))):
        Polygon((-99.353637726, -205.195366412), (-109.513637726, -265.393366412), (-103.163637726, -265.393366412), (-103.163637726, -268.695366412), (-99.353637726, -268.695366412), align=None)
    # profile 38 of 41: a face of its own
    with BuildSketch(Plane(origin=(0, 0, 0), x_dir=(1, 0, 0), z_dir=(0, 1, 0))):
        Polygon((-112.053637726, -205.195366412), (-122.213637726, -265.393366412), (-115.863637726, -265.393366412), (-115.863637726, -268.695366412), (-112.053637726, -268.695366412), align=None)
    # profile 39 of 41: a face of its own
    with BuildSketch(Plane(origin=(0, 0, 0), x_dir=(1, 0, 0), z_dir=(0, 1, 0))):
        with BuildLine():
            Line((6.736490334, -131.88034668), (-56.763509666, -131.88034668))
            Line((-56.763509666, -131.88034668), (-56.763509666, -195.38034668))
            Line((-56.763509666, -195.38034668), (-53.043765787, -195.38034668))
            ThreePointArc((-53.043765787, -195.38034668), (-50.613725991, -194.896981712), (-48.553637726, -193.520474741))
            Line((-48.553637726, -193.520474741), (4.876618395, -140.09021862))
            ThreePointArc((4.876618395, -140.09021862), (6.253125366, -138.030130355), (6.736490334, -135.600090559))
            Line((6.736490334, -135.600090559), (6.736490334, -131.88034668))
        make_face()
    # profile 40 of 41: a face of its own
    with BuildSketch(Plane(origin=(0, 0, 0), x_dir=(1, 0, 0), z_dir=(0, 1, 0))):
        with BuildLine():
            Line((21.296362274, -193.520474741), (74.726618395, -140.09021862))
            ThreePointArc((74.726618395, -140.09021862), (76.103125366, -138.030130355), (76.586490334, -135.600090559))
            Line((76.586490334, -135.600090559), (76.586490334, -131.88034668))
            Line((76.586490334, -131.88034668), (13.086490334, -131.88034668))
            Line((13.086490334, -131.88034668), (13.086490334, -195.38034668))
            Line((13.086490334, -195.38034668), (16.806234213, -195.38034668))
            ThreePointArc((16.806234213, -195.38034668), (19.236274009, -194.896981712), (21.296362274, -193.520474741))
        make_face()
    # profile 41 of 41: a face of its own
    with BuildSketch(Plane(origin=(0, 0, 0), x_dir=(1, 0, 0), z_dir=(0, 1, 0))):
        with BuildLine():
            Line((-126.613509666, -131.88034668), (-126.613509666, -195.38034668))
            Line((-126.613509666, -195.38034668), (-122.893765787, -195.38034668))
            ThreePointArc((-122.893765787, -195.38034668), (-120.463725991, -194.896981712), (-118.403637726, -193.520474741))
            Line((-118.403637726, -193.520474741), (-64.973381605, -140.09021862))
            ThreePointArc((-64.973381605, -140.09021862), (-63.596874634, -138.030130355), (-63.113509666, -135.600090559))
            Line((-63.113509666, -135.600090559), (-63.113509666, -131.88034668))
            Line((-63.113509666, -131.88034668), (-126.613509666, -131.88034668))
        make_face()
    extrude(amount=BODY_DELETE_KEEP_1_DEPTH, mode=Mode.SUBTRACT)


solid = part.part
